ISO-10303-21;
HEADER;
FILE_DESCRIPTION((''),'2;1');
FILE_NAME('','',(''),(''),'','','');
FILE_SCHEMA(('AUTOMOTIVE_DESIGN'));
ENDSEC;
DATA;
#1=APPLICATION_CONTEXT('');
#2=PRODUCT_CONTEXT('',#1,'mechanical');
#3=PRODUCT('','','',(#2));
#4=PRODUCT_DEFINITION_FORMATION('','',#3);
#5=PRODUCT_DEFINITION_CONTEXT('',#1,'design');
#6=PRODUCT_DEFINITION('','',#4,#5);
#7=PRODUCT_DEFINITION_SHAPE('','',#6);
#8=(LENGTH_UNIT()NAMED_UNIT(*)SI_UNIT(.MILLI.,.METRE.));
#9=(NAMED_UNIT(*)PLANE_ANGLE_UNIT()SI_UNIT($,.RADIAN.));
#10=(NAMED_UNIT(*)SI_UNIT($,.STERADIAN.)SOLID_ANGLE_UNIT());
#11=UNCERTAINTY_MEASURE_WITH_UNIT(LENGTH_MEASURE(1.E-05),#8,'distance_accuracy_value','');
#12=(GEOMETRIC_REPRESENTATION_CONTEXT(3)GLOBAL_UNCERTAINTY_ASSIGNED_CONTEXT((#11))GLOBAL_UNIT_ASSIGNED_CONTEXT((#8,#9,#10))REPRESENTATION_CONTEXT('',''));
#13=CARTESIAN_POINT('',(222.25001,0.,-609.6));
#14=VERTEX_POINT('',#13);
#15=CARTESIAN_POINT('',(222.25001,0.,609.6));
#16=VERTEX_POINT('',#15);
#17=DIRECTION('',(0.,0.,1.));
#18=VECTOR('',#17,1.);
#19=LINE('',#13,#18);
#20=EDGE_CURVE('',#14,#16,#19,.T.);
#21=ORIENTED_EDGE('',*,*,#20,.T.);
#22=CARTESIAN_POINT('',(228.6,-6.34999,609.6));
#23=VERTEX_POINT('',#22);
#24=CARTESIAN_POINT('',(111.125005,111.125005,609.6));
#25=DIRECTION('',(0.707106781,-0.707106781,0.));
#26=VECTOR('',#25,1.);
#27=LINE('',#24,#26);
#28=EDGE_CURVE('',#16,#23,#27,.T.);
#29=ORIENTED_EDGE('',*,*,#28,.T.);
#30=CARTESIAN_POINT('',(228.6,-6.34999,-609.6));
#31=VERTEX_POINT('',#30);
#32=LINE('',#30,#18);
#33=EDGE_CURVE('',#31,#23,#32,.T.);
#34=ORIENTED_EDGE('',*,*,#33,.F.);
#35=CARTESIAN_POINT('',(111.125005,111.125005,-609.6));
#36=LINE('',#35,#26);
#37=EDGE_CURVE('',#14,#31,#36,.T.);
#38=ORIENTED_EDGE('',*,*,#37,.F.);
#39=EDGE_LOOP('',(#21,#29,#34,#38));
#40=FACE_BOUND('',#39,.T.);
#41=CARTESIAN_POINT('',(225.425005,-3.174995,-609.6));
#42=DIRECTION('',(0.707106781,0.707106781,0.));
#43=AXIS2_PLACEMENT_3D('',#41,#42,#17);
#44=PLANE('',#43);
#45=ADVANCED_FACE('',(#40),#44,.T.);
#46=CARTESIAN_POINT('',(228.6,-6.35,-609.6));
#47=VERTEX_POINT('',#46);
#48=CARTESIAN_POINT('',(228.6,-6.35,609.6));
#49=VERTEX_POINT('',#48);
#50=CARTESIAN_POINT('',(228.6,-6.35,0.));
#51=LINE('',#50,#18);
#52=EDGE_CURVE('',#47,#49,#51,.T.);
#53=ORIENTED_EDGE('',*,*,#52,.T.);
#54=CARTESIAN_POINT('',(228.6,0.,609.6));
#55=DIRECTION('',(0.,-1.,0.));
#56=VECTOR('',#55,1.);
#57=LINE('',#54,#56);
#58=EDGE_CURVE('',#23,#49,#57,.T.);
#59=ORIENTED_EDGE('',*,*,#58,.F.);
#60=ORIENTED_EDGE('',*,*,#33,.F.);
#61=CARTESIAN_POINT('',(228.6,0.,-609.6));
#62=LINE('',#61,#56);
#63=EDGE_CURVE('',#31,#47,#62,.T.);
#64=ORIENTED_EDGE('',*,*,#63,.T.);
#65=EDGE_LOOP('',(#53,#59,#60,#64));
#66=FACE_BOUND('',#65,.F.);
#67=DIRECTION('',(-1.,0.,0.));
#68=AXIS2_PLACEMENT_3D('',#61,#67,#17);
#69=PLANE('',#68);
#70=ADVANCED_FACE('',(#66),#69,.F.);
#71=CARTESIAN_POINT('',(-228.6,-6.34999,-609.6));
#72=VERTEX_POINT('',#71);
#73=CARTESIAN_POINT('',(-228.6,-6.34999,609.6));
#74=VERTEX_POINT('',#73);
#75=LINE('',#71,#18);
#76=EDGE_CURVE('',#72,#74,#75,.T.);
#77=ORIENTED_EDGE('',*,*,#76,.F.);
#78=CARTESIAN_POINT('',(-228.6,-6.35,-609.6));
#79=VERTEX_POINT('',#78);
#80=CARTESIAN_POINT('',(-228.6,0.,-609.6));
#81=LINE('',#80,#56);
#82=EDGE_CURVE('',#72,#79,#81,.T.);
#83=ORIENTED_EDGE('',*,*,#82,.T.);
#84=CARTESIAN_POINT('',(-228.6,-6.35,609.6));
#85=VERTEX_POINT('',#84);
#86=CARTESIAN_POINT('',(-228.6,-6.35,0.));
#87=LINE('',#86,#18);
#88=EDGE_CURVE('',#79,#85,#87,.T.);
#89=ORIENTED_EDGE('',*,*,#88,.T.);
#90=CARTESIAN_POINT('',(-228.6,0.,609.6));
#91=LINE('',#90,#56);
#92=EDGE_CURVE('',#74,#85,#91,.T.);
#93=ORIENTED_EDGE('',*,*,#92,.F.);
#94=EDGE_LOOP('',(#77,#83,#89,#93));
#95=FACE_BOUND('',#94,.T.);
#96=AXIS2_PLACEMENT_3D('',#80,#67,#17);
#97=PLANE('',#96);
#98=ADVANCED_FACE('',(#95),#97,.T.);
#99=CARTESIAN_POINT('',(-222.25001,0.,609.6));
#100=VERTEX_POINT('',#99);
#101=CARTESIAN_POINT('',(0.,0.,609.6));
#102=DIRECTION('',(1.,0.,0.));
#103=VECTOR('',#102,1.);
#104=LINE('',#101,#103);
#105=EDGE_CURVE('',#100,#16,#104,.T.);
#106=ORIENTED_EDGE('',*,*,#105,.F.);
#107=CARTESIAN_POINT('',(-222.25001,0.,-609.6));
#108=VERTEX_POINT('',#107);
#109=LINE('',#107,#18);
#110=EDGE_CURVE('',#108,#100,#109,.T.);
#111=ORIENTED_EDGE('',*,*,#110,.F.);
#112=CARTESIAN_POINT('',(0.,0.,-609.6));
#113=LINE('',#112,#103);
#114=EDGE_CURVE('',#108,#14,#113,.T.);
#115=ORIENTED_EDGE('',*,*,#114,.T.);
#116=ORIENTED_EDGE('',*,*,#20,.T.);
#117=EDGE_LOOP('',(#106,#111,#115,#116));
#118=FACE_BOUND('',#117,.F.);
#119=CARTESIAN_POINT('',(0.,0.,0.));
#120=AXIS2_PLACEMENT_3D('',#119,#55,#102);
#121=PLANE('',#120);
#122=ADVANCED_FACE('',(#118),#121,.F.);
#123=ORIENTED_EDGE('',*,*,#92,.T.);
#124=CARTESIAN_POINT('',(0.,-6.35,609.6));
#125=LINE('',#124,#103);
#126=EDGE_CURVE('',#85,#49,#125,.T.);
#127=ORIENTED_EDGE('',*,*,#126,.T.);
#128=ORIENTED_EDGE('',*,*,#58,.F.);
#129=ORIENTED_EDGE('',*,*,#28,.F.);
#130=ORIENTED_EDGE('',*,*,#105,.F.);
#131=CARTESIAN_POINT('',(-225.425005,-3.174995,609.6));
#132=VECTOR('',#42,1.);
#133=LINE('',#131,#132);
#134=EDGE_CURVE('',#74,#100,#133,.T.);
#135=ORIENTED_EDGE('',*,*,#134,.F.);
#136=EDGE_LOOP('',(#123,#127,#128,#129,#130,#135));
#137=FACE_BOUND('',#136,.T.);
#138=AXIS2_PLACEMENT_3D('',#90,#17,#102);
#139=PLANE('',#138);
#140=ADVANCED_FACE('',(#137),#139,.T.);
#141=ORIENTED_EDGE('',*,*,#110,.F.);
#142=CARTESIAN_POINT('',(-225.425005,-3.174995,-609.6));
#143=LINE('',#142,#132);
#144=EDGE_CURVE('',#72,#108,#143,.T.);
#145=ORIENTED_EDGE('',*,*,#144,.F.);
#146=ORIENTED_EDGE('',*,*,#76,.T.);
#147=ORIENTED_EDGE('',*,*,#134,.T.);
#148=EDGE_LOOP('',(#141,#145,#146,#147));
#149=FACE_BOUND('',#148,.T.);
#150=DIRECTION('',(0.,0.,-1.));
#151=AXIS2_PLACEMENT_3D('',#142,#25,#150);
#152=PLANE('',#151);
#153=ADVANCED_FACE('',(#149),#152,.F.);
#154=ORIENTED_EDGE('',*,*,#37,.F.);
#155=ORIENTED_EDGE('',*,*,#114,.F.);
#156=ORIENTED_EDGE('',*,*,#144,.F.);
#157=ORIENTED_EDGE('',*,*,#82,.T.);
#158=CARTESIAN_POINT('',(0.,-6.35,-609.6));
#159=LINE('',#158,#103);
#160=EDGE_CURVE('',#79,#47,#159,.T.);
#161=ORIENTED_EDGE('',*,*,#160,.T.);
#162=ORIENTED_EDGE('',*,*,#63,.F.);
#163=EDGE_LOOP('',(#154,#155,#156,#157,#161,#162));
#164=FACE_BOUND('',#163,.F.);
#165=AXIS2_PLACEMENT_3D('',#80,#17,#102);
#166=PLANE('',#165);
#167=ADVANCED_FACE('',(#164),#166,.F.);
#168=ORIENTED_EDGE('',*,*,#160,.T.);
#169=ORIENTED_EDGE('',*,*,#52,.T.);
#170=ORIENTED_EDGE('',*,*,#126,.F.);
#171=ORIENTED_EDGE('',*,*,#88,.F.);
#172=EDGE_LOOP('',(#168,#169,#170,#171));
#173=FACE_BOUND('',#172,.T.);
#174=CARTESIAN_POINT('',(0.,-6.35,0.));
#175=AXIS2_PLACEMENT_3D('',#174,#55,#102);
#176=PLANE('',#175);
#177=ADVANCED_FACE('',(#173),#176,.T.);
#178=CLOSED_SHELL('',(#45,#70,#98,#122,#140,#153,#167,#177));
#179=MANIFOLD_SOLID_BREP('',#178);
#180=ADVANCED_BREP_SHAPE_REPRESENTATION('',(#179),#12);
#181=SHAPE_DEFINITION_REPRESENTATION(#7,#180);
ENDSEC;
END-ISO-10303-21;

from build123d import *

# Parameters (mm, degrees)
F0_W     = 457.2
F0_H     = 1219.2
F1_DEPTH = 6.35
F2_SIZE  = 6.34999
F3_SIZE  = 6.34999


# Not quite as in the source:
# - a fillet or chamfer is up to 0.001 mm smaller than in the source, because OpenCascade refuses the exact size


with BuildPart() as f1:
    # F0 (on Front) → F1 (new body)
    with BuildSketch(Plane.XZ):
        Rectangle(F0_W, F0_H)
    extrude(amount=F1_DEPTH)

    # F2 (size 6.35 in the source; OpenCascade refuses exactly that, so slightly less here)
    f2_edges = [f1.edges().sort_by_distance(p)[0] for p in [
        (-228.6, 0, 0),
    ]]
    chamfer(f2_edges, length=F2_SIZE)

    # F3 (size 6.35 in the source; OpenCascade refuses exactly that, so slightly less here)
    f3_edges = [f1.edges().sort_by_distance(p)[0] for p in [
        (228.6, 0, 0),
    ]]
    chamfer(f3_edges, length=F3_SIZE)


solid = f1.part
